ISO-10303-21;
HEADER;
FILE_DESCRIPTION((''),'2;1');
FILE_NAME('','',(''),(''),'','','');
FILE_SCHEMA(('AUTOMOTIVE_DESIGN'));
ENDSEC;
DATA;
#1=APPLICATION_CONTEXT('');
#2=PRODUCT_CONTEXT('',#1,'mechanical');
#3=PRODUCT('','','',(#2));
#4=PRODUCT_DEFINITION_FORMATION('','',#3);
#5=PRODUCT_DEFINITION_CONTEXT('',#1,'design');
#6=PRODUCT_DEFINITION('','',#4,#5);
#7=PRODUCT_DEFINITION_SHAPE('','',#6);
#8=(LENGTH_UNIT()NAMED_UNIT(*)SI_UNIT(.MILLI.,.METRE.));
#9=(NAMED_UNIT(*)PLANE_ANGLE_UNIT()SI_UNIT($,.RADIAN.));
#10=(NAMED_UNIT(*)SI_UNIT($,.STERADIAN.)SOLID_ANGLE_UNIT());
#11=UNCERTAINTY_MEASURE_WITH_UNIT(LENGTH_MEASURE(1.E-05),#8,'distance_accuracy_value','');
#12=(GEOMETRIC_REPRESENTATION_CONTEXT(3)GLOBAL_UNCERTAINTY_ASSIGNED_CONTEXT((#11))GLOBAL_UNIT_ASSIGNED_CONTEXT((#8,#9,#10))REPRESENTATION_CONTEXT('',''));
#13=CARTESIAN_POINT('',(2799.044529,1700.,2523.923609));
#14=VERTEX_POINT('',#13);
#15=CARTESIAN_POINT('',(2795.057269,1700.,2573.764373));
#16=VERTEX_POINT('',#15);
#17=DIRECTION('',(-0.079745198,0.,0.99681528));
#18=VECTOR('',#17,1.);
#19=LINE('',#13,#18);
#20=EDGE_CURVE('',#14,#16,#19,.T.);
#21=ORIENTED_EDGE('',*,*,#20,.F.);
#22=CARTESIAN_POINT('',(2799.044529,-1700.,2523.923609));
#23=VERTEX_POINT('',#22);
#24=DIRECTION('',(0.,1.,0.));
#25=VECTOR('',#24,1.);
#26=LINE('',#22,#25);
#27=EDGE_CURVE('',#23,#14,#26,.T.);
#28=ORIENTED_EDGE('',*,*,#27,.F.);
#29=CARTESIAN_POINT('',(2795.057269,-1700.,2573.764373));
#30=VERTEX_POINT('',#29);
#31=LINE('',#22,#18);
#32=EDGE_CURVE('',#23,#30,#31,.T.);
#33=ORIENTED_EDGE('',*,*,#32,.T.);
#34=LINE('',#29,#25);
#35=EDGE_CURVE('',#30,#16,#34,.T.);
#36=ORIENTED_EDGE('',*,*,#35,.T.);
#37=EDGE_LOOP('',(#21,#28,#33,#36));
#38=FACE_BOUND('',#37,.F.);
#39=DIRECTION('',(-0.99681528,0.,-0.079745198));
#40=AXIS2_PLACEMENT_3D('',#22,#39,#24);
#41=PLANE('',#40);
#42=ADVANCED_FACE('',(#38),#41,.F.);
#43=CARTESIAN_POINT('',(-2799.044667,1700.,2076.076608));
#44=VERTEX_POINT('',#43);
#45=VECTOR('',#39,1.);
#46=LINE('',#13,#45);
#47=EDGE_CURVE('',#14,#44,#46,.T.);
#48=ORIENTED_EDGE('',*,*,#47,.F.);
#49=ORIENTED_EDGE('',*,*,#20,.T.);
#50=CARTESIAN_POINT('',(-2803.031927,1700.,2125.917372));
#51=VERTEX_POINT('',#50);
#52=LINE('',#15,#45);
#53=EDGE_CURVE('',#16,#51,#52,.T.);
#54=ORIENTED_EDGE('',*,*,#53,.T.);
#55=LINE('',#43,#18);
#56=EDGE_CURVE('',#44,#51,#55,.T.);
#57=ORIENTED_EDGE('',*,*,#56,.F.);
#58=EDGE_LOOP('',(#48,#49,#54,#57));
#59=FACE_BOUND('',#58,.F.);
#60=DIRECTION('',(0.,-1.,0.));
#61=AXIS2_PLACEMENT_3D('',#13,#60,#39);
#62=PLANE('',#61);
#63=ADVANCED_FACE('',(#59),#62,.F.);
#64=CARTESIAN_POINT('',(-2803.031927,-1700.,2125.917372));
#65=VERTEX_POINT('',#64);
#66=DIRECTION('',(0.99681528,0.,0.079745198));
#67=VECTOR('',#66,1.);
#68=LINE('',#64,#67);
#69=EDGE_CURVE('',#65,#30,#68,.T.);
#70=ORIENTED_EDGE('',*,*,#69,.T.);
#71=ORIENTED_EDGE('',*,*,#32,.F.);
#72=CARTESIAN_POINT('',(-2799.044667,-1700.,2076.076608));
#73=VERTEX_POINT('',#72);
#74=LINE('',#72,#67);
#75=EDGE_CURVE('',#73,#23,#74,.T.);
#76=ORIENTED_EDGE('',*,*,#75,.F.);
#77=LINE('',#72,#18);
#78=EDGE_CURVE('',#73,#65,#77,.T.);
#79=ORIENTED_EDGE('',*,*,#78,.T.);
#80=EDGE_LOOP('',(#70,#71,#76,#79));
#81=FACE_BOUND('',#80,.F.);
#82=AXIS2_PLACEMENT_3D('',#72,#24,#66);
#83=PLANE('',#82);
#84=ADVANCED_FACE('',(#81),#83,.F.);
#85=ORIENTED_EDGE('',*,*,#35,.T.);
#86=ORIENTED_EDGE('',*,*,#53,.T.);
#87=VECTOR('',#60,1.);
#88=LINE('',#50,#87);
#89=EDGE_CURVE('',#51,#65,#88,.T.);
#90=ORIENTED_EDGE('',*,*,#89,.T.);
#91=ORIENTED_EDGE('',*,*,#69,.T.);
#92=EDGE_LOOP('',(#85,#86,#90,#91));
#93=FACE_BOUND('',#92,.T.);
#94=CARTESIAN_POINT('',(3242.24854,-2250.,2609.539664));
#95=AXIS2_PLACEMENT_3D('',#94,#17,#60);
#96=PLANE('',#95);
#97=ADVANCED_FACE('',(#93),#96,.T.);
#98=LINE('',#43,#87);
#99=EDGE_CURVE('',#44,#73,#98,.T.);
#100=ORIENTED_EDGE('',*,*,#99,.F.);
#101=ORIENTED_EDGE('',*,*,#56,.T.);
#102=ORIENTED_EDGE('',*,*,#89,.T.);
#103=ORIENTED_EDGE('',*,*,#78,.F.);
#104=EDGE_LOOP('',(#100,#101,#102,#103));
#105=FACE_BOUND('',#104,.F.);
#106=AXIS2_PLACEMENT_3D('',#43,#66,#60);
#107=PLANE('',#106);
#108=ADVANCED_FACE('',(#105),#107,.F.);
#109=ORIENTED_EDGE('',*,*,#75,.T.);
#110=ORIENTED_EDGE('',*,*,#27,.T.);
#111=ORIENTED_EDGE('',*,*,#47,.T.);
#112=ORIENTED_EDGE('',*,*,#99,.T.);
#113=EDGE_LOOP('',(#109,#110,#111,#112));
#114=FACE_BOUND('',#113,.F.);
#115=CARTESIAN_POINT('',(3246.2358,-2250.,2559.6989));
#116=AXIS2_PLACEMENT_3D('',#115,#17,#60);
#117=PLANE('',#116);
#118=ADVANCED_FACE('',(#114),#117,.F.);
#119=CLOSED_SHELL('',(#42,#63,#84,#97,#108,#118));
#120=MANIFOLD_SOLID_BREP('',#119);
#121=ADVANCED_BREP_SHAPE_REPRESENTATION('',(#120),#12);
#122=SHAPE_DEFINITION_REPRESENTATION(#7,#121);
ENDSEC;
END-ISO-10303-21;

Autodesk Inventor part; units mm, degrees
ref_plane "YZ Plane" through (0, 0, 0) normal (1, 0, 0) x (0, 1, 0)
ref_plane "XZ Plane" through (0, 0, 0) normal (0, 1, 0) x (-1, 0, 0)
ref_plane "XY Plane" through (0, 0, 0) normal (0, 0, 1) x (1, 0, 0)
ref_plane "Arbeitsebene1" through (3246.2358, -2250, 2559.6989) normal (-0.0797452, 0, 0.9968153) x (0, -1, 0)
sketch "Skizze1" plane through (3246.2358, -2250, 2559.6989) normal (-0.0797452, 0, 0.9968153) x (0, -1, 0)
  line L0 (-850, -848.9395) -> (-3650, -848.9395) projected
  line L1 (-850, -5664.275) -> (-850, -848.9395) projected
  line L2 (-3650, -5664.275) -> (-850, -5664.275) projected
  line L3 (-3650, -848.9395) -> (-3650, -5664.275) projected
  line L4 (-3750, -5764.5945) -> (-3750, -748.62) projected
  line L5 (-750, -5764.5945) -> (-3750, -5764.5945) projected
  line L6 (-750, -748.62) -> (-750, -5764.5945) projected
  line L7 (-750, -748.62) -> (-3750, -748.62) projected
  line L8 (-3950, -6064.5945) -> (-550, -6064.5945)
  line L9 (-550, -6064.5945) -> (-550, -448.62)
  line L10 (-550, -448.62) -> (-3950, -448.62)
  line L11 (-3950, -448.62) -> (-3950, -6064.5945)
  dimension "d0" = 200
  dimension "d1" = 300
  dimension "d2" = 300
  dimension "d3" = 200
extrude "Extrusion1" add sketch "Skizze1" along normal blind 50 contours L1 L2 L3 L0 | L4 L7 L6 L5 | L11 L10 L9 L8
equation "\"d2\" = d1"
equation "\"d3\" = d0"
properties part number "Dach"
